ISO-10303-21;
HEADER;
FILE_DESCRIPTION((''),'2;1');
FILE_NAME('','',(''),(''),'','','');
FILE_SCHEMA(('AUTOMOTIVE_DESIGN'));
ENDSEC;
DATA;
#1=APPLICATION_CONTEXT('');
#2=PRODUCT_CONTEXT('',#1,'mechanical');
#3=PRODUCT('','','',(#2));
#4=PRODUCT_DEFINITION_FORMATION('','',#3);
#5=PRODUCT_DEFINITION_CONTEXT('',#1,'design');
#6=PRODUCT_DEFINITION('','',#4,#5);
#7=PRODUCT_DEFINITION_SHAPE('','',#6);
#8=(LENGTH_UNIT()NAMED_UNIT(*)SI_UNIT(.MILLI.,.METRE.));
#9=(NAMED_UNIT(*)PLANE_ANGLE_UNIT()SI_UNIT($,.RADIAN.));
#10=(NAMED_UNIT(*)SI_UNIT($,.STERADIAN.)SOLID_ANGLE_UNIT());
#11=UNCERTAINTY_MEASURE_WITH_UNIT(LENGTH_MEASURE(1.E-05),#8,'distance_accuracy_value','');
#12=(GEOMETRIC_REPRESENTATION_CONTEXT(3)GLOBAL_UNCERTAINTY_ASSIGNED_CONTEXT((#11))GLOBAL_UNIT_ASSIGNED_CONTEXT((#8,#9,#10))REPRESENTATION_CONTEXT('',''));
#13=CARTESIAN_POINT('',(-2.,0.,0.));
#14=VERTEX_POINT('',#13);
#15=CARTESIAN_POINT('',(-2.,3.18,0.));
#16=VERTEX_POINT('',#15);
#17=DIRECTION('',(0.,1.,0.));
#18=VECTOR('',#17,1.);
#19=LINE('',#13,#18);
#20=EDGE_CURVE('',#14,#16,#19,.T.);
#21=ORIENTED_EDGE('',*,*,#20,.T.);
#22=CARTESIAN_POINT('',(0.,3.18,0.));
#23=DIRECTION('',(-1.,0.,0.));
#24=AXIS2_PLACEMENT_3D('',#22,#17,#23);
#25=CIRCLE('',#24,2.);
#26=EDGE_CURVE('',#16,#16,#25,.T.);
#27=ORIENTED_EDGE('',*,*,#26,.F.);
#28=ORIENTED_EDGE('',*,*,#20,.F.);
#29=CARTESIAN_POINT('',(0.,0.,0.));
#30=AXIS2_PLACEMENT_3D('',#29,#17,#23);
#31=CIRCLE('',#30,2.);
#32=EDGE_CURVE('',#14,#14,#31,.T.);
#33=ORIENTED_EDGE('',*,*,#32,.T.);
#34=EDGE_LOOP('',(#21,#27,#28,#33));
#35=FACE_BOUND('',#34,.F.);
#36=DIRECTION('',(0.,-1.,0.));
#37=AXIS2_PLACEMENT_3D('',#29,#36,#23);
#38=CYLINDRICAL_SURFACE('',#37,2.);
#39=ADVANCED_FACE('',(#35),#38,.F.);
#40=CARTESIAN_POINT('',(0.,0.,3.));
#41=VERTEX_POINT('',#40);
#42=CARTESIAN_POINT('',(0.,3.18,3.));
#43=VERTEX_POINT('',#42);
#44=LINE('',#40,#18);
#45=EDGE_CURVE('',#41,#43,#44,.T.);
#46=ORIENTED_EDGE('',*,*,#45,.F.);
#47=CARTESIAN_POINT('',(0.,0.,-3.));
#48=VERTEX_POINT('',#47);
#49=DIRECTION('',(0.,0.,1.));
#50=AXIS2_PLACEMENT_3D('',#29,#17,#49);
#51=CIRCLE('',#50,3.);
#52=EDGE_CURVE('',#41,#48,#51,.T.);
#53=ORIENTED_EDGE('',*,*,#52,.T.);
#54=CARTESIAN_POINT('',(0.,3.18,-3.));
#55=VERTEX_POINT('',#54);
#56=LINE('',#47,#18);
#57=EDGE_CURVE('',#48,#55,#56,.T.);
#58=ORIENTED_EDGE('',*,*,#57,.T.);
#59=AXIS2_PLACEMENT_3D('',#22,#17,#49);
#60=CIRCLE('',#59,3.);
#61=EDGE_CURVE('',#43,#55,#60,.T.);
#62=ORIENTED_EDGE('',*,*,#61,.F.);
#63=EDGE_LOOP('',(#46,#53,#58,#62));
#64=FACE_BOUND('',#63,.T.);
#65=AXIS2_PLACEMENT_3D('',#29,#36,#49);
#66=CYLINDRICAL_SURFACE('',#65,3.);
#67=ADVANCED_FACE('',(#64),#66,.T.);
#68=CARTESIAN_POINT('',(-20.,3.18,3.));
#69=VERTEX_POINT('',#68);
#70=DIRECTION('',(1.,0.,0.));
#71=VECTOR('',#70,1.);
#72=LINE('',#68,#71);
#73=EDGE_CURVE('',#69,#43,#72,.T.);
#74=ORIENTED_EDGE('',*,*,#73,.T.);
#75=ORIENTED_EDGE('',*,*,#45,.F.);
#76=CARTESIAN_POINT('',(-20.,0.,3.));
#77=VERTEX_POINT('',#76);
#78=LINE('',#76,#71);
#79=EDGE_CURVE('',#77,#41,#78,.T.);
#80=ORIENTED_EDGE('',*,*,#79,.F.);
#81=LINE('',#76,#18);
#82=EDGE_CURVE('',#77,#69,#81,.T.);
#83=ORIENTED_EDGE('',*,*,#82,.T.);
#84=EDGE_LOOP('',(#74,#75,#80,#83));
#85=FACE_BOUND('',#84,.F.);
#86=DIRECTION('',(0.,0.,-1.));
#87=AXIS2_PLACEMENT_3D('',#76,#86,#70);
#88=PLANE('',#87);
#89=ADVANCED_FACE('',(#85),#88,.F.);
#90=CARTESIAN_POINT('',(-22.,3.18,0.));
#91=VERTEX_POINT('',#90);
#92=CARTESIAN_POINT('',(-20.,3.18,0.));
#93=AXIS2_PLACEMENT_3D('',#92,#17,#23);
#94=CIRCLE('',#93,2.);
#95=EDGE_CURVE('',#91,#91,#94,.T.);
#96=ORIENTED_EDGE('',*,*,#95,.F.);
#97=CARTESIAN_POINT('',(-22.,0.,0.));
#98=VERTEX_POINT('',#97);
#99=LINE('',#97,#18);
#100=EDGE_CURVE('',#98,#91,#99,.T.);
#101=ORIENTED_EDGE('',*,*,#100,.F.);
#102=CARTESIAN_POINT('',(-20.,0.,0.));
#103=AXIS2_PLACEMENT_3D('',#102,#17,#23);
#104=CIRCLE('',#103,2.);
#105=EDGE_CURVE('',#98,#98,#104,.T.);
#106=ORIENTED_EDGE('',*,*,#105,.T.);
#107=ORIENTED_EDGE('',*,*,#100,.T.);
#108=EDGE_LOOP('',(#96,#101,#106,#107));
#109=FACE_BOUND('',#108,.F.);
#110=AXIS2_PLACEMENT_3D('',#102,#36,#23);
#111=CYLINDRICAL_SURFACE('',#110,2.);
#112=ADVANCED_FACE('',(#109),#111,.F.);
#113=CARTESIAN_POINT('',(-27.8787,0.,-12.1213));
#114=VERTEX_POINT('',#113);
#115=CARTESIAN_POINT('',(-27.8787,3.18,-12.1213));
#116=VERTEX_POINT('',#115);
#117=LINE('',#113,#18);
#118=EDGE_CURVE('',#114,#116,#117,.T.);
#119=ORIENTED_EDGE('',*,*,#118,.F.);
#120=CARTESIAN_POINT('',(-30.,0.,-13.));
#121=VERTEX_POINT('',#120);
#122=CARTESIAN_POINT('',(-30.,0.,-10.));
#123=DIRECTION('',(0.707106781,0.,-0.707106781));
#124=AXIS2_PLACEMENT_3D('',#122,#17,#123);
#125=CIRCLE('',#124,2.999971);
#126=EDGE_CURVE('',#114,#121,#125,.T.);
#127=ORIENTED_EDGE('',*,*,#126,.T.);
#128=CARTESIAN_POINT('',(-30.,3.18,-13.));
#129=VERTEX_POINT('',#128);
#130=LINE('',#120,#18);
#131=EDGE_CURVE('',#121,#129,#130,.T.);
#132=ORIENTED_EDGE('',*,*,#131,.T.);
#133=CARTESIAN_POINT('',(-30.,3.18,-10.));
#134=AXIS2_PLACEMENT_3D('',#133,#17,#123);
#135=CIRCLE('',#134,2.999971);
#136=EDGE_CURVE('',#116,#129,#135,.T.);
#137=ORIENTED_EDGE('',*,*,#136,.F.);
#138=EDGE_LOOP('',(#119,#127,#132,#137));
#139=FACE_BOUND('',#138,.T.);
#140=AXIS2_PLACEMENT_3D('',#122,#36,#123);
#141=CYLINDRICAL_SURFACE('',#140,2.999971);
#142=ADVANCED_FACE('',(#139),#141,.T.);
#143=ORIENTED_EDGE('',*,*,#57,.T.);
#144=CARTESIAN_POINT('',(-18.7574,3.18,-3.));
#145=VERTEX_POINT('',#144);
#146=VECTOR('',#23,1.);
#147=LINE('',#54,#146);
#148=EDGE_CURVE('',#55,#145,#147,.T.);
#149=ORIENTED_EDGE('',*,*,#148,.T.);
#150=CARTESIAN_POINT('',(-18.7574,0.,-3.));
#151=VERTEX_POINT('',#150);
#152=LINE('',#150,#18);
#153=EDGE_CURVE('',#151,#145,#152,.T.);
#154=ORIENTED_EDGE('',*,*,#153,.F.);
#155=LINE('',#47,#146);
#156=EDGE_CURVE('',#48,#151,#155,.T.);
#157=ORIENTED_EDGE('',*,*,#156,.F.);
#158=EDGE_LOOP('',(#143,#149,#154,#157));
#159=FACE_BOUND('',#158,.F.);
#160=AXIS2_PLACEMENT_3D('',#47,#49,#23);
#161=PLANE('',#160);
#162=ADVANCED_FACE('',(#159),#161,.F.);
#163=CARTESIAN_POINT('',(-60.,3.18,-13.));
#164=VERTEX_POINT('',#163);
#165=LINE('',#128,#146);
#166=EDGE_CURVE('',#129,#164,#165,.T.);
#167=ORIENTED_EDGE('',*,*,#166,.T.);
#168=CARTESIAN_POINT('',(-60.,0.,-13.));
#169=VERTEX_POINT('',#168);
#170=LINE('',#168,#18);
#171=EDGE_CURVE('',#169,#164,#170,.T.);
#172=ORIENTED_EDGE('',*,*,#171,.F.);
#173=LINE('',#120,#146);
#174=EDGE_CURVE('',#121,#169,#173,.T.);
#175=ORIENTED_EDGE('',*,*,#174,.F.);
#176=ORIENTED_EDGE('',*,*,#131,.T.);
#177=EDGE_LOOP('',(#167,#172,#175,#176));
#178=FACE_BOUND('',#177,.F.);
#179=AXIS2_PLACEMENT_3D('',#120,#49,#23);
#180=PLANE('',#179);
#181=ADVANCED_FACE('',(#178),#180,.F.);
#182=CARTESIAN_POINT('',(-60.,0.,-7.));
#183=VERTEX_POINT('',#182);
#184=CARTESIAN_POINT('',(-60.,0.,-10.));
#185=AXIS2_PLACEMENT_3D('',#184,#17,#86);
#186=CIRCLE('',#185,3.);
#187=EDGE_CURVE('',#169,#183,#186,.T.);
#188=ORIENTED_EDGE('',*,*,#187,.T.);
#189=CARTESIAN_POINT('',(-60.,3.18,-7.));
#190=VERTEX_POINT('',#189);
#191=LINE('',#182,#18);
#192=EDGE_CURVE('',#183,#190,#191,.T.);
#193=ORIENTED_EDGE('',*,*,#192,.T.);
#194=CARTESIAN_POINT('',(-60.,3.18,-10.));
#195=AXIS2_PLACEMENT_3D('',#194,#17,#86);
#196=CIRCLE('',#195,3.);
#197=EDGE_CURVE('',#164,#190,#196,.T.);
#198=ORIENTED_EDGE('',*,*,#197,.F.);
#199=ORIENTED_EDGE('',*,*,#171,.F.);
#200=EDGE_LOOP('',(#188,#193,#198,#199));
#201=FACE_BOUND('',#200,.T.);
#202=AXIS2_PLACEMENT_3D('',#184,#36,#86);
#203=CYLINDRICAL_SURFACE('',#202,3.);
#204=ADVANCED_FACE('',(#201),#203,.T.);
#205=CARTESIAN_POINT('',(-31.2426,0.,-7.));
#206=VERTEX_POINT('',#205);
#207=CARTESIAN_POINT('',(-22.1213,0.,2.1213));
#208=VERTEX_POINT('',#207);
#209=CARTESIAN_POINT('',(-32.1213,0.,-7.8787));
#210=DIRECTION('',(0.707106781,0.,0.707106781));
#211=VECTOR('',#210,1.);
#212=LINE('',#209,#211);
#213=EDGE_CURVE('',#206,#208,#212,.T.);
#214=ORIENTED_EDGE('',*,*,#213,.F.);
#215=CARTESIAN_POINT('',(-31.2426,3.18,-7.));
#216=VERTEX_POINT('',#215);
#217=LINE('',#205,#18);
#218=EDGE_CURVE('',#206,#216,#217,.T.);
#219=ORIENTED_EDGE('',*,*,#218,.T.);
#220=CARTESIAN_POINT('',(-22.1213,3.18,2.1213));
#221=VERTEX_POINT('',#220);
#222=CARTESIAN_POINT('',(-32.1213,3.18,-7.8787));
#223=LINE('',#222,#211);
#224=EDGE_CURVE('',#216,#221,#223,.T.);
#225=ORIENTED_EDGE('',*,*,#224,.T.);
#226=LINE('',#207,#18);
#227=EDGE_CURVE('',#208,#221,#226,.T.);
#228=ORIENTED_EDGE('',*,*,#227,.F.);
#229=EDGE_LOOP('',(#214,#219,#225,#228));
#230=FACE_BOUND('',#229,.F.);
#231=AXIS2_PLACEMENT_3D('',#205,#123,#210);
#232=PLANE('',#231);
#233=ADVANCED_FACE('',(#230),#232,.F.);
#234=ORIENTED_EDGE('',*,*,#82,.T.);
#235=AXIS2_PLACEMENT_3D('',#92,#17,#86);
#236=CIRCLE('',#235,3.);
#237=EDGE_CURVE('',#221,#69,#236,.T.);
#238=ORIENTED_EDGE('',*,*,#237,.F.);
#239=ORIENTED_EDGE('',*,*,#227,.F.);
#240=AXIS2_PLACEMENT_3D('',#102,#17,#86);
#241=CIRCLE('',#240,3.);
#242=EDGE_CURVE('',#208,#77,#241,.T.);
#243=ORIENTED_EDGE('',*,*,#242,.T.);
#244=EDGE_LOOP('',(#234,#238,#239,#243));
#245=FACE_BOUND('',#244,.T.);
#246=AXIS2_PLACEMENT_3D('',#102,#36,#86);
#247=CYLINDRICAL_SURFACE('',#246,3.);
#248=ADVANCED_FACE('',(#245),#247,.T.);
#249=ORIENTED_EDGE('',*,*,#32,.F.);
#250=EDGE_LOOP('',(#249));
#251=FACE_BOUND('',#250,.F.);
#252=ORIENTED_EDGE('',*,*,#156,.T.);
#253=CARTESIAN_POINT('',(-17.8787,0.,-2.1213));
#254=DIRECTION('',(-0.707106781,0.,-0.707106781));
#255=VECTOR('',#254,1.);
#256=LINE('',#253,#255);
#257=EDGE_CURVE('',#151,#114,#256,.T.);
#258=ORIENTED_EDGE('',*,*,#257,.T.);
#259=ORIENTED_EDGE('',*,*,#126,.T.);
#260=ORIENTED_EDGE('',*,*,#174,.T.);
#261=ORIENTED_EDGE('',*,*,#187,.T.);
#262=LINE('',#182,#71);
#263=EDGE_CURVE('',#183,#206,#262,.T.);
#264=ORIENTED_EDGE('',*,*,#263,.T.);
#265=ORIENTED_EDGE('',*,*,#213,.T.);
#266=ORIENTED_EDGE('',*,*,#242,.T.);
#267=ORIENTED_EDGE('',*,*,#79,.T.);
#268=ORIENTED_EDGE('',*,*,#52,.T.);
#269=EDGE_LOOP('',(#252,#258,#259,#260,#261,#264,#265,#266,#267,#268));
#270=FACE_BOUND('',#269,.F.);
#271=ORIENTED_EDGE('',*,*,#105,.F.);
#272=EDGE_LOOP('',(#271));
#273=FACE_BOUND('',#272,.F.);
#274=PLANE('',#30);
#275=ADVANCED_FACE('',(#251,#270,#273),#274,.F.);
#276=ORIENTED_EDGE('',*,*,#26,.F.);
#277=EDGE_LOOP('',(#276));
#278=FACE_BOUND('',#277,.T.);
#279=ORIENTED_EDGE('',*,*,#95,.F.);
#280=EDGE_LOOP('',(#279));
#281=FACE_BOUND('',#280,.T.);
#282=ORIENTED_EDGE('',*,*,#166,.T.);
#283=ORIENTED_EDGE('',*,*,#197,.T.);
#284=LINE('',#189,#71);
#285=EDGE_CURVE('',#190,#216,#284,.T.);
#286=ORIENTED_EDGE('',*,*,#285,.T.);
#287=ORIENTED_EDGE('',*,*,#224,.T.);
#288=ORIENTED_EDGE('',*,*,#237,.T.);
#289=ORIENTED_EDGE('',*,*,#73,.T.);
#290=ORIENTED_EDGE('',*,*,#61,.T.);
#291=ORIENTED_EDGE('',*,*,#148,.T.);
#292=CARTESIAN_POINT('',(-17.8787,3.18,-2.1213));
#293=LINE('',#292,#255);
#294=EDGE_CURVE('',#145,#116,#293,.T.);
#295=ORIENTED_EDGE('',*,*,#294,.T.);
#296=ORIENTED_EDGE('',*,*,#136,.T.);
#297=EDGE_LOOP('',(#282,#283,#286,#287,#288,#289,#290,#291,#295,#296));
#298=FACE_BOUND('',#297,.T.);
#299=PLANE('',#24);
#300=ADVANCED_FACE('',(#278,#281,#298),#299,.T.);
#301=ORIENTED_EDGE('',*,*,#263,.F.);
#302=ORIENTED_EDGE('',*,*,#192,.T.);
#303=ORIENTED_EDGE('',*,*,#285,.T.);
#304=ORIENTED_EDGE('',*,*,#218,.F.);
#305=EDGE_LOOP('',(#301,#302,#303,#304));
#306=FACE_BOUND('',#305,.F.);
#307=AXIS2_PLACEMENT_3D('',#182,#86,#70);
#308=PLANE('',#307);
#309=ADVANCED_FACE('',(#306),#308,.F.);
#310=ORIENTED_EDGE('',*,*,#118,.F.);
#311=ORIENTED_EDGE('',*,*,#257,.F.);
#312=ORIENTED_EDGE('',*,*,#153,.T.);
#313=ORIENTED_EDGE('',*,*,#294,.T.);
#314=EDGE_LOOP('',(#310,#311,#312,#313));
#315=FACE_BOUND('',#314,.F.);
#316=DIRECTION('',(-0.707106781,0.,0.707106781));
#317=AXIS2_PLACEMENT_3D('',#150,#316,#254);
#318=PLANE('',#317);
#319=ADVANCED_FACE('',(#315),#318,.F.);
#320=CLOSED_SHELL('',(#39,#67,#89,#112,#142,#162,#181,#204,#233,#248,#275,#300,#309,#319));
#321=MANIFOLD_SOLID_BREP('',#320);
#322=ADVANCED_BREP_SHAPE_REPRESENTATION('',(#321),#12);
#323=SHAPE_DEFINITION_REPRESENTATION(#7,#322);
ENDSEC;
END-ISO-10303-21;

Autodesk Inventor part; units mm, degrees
ref_plane "YZ Plane" through (0, 0, 0) normal (1, 0, 0) x (0, 1, 0)
ref_plane "XZ Plane" through (0, 0, 0) normal (0, 1, 0) x (-1, 0, 0)
ref_plane "XY Plane" through (0, 0, 0) normal (0, 0, 1) x (1, 0, 0)
sketch "Boceto1" plane through (0, 0, 0) normal (0, 1, 0) x (-1, 0, 0)
  circle A0 centre (0, 0) radius 2
  line L0 (0, 0) -> (20, 0) construction
  line L1 (0, -3) -> (20, -3)
  line L2 (20, 3) -> (0, 3)
  arc A1 (0, 3) -> (0, -3) centre (0, 0) ccw
  arc A2 (20, -3) -> (20, 3) centre (20, 0) ccw
  circle A3 centre (20, 0) radius 2
  line L3 (20, 0) -> (30, -10) construction
  line L4 (17.8787, -2.1213) -> (27.8787, -12.1213)
  line L5 (32.1213, -7.8787) -> (22.1213, 2.1213)
  arc A4 (22.1213, 2.1213) -> (17.8787, -2.1213) centre (20, 0) ccw
  arc A5 (27.8787, -12.1213) -> (32.1213, -7.8787) centre (30, -10) ccw
  line L6 (30, -10) -> (60, -10) construction
  line L7 (30, -13) -> (60, -13)
  line L8 (60, -7) -> (30, -7)
  arc A6 (30, -7) -> (30, -13) centre (30, -10) ccw
  arc A7 (60, -13) -> (60, -7) centre (60, -10) ccw
  point P0 (10, 0)
  point P1 (25, -5)
  point P2 (45, -10)
  dimension "d0" = 4
  dimension "d1" = 6
  dimension "d2" = 20
  dimension "d3" = 4
  dimension "d4" = 6
  dimension "d5" = 5
  dimension "d6" = 5
  dimension "d7" = 6
  dimension "d8" = 30
extrude "Extrusión1" add sketch "Boceto1" along normal blind 3.18
properties part number "PINZA_DEDO"
